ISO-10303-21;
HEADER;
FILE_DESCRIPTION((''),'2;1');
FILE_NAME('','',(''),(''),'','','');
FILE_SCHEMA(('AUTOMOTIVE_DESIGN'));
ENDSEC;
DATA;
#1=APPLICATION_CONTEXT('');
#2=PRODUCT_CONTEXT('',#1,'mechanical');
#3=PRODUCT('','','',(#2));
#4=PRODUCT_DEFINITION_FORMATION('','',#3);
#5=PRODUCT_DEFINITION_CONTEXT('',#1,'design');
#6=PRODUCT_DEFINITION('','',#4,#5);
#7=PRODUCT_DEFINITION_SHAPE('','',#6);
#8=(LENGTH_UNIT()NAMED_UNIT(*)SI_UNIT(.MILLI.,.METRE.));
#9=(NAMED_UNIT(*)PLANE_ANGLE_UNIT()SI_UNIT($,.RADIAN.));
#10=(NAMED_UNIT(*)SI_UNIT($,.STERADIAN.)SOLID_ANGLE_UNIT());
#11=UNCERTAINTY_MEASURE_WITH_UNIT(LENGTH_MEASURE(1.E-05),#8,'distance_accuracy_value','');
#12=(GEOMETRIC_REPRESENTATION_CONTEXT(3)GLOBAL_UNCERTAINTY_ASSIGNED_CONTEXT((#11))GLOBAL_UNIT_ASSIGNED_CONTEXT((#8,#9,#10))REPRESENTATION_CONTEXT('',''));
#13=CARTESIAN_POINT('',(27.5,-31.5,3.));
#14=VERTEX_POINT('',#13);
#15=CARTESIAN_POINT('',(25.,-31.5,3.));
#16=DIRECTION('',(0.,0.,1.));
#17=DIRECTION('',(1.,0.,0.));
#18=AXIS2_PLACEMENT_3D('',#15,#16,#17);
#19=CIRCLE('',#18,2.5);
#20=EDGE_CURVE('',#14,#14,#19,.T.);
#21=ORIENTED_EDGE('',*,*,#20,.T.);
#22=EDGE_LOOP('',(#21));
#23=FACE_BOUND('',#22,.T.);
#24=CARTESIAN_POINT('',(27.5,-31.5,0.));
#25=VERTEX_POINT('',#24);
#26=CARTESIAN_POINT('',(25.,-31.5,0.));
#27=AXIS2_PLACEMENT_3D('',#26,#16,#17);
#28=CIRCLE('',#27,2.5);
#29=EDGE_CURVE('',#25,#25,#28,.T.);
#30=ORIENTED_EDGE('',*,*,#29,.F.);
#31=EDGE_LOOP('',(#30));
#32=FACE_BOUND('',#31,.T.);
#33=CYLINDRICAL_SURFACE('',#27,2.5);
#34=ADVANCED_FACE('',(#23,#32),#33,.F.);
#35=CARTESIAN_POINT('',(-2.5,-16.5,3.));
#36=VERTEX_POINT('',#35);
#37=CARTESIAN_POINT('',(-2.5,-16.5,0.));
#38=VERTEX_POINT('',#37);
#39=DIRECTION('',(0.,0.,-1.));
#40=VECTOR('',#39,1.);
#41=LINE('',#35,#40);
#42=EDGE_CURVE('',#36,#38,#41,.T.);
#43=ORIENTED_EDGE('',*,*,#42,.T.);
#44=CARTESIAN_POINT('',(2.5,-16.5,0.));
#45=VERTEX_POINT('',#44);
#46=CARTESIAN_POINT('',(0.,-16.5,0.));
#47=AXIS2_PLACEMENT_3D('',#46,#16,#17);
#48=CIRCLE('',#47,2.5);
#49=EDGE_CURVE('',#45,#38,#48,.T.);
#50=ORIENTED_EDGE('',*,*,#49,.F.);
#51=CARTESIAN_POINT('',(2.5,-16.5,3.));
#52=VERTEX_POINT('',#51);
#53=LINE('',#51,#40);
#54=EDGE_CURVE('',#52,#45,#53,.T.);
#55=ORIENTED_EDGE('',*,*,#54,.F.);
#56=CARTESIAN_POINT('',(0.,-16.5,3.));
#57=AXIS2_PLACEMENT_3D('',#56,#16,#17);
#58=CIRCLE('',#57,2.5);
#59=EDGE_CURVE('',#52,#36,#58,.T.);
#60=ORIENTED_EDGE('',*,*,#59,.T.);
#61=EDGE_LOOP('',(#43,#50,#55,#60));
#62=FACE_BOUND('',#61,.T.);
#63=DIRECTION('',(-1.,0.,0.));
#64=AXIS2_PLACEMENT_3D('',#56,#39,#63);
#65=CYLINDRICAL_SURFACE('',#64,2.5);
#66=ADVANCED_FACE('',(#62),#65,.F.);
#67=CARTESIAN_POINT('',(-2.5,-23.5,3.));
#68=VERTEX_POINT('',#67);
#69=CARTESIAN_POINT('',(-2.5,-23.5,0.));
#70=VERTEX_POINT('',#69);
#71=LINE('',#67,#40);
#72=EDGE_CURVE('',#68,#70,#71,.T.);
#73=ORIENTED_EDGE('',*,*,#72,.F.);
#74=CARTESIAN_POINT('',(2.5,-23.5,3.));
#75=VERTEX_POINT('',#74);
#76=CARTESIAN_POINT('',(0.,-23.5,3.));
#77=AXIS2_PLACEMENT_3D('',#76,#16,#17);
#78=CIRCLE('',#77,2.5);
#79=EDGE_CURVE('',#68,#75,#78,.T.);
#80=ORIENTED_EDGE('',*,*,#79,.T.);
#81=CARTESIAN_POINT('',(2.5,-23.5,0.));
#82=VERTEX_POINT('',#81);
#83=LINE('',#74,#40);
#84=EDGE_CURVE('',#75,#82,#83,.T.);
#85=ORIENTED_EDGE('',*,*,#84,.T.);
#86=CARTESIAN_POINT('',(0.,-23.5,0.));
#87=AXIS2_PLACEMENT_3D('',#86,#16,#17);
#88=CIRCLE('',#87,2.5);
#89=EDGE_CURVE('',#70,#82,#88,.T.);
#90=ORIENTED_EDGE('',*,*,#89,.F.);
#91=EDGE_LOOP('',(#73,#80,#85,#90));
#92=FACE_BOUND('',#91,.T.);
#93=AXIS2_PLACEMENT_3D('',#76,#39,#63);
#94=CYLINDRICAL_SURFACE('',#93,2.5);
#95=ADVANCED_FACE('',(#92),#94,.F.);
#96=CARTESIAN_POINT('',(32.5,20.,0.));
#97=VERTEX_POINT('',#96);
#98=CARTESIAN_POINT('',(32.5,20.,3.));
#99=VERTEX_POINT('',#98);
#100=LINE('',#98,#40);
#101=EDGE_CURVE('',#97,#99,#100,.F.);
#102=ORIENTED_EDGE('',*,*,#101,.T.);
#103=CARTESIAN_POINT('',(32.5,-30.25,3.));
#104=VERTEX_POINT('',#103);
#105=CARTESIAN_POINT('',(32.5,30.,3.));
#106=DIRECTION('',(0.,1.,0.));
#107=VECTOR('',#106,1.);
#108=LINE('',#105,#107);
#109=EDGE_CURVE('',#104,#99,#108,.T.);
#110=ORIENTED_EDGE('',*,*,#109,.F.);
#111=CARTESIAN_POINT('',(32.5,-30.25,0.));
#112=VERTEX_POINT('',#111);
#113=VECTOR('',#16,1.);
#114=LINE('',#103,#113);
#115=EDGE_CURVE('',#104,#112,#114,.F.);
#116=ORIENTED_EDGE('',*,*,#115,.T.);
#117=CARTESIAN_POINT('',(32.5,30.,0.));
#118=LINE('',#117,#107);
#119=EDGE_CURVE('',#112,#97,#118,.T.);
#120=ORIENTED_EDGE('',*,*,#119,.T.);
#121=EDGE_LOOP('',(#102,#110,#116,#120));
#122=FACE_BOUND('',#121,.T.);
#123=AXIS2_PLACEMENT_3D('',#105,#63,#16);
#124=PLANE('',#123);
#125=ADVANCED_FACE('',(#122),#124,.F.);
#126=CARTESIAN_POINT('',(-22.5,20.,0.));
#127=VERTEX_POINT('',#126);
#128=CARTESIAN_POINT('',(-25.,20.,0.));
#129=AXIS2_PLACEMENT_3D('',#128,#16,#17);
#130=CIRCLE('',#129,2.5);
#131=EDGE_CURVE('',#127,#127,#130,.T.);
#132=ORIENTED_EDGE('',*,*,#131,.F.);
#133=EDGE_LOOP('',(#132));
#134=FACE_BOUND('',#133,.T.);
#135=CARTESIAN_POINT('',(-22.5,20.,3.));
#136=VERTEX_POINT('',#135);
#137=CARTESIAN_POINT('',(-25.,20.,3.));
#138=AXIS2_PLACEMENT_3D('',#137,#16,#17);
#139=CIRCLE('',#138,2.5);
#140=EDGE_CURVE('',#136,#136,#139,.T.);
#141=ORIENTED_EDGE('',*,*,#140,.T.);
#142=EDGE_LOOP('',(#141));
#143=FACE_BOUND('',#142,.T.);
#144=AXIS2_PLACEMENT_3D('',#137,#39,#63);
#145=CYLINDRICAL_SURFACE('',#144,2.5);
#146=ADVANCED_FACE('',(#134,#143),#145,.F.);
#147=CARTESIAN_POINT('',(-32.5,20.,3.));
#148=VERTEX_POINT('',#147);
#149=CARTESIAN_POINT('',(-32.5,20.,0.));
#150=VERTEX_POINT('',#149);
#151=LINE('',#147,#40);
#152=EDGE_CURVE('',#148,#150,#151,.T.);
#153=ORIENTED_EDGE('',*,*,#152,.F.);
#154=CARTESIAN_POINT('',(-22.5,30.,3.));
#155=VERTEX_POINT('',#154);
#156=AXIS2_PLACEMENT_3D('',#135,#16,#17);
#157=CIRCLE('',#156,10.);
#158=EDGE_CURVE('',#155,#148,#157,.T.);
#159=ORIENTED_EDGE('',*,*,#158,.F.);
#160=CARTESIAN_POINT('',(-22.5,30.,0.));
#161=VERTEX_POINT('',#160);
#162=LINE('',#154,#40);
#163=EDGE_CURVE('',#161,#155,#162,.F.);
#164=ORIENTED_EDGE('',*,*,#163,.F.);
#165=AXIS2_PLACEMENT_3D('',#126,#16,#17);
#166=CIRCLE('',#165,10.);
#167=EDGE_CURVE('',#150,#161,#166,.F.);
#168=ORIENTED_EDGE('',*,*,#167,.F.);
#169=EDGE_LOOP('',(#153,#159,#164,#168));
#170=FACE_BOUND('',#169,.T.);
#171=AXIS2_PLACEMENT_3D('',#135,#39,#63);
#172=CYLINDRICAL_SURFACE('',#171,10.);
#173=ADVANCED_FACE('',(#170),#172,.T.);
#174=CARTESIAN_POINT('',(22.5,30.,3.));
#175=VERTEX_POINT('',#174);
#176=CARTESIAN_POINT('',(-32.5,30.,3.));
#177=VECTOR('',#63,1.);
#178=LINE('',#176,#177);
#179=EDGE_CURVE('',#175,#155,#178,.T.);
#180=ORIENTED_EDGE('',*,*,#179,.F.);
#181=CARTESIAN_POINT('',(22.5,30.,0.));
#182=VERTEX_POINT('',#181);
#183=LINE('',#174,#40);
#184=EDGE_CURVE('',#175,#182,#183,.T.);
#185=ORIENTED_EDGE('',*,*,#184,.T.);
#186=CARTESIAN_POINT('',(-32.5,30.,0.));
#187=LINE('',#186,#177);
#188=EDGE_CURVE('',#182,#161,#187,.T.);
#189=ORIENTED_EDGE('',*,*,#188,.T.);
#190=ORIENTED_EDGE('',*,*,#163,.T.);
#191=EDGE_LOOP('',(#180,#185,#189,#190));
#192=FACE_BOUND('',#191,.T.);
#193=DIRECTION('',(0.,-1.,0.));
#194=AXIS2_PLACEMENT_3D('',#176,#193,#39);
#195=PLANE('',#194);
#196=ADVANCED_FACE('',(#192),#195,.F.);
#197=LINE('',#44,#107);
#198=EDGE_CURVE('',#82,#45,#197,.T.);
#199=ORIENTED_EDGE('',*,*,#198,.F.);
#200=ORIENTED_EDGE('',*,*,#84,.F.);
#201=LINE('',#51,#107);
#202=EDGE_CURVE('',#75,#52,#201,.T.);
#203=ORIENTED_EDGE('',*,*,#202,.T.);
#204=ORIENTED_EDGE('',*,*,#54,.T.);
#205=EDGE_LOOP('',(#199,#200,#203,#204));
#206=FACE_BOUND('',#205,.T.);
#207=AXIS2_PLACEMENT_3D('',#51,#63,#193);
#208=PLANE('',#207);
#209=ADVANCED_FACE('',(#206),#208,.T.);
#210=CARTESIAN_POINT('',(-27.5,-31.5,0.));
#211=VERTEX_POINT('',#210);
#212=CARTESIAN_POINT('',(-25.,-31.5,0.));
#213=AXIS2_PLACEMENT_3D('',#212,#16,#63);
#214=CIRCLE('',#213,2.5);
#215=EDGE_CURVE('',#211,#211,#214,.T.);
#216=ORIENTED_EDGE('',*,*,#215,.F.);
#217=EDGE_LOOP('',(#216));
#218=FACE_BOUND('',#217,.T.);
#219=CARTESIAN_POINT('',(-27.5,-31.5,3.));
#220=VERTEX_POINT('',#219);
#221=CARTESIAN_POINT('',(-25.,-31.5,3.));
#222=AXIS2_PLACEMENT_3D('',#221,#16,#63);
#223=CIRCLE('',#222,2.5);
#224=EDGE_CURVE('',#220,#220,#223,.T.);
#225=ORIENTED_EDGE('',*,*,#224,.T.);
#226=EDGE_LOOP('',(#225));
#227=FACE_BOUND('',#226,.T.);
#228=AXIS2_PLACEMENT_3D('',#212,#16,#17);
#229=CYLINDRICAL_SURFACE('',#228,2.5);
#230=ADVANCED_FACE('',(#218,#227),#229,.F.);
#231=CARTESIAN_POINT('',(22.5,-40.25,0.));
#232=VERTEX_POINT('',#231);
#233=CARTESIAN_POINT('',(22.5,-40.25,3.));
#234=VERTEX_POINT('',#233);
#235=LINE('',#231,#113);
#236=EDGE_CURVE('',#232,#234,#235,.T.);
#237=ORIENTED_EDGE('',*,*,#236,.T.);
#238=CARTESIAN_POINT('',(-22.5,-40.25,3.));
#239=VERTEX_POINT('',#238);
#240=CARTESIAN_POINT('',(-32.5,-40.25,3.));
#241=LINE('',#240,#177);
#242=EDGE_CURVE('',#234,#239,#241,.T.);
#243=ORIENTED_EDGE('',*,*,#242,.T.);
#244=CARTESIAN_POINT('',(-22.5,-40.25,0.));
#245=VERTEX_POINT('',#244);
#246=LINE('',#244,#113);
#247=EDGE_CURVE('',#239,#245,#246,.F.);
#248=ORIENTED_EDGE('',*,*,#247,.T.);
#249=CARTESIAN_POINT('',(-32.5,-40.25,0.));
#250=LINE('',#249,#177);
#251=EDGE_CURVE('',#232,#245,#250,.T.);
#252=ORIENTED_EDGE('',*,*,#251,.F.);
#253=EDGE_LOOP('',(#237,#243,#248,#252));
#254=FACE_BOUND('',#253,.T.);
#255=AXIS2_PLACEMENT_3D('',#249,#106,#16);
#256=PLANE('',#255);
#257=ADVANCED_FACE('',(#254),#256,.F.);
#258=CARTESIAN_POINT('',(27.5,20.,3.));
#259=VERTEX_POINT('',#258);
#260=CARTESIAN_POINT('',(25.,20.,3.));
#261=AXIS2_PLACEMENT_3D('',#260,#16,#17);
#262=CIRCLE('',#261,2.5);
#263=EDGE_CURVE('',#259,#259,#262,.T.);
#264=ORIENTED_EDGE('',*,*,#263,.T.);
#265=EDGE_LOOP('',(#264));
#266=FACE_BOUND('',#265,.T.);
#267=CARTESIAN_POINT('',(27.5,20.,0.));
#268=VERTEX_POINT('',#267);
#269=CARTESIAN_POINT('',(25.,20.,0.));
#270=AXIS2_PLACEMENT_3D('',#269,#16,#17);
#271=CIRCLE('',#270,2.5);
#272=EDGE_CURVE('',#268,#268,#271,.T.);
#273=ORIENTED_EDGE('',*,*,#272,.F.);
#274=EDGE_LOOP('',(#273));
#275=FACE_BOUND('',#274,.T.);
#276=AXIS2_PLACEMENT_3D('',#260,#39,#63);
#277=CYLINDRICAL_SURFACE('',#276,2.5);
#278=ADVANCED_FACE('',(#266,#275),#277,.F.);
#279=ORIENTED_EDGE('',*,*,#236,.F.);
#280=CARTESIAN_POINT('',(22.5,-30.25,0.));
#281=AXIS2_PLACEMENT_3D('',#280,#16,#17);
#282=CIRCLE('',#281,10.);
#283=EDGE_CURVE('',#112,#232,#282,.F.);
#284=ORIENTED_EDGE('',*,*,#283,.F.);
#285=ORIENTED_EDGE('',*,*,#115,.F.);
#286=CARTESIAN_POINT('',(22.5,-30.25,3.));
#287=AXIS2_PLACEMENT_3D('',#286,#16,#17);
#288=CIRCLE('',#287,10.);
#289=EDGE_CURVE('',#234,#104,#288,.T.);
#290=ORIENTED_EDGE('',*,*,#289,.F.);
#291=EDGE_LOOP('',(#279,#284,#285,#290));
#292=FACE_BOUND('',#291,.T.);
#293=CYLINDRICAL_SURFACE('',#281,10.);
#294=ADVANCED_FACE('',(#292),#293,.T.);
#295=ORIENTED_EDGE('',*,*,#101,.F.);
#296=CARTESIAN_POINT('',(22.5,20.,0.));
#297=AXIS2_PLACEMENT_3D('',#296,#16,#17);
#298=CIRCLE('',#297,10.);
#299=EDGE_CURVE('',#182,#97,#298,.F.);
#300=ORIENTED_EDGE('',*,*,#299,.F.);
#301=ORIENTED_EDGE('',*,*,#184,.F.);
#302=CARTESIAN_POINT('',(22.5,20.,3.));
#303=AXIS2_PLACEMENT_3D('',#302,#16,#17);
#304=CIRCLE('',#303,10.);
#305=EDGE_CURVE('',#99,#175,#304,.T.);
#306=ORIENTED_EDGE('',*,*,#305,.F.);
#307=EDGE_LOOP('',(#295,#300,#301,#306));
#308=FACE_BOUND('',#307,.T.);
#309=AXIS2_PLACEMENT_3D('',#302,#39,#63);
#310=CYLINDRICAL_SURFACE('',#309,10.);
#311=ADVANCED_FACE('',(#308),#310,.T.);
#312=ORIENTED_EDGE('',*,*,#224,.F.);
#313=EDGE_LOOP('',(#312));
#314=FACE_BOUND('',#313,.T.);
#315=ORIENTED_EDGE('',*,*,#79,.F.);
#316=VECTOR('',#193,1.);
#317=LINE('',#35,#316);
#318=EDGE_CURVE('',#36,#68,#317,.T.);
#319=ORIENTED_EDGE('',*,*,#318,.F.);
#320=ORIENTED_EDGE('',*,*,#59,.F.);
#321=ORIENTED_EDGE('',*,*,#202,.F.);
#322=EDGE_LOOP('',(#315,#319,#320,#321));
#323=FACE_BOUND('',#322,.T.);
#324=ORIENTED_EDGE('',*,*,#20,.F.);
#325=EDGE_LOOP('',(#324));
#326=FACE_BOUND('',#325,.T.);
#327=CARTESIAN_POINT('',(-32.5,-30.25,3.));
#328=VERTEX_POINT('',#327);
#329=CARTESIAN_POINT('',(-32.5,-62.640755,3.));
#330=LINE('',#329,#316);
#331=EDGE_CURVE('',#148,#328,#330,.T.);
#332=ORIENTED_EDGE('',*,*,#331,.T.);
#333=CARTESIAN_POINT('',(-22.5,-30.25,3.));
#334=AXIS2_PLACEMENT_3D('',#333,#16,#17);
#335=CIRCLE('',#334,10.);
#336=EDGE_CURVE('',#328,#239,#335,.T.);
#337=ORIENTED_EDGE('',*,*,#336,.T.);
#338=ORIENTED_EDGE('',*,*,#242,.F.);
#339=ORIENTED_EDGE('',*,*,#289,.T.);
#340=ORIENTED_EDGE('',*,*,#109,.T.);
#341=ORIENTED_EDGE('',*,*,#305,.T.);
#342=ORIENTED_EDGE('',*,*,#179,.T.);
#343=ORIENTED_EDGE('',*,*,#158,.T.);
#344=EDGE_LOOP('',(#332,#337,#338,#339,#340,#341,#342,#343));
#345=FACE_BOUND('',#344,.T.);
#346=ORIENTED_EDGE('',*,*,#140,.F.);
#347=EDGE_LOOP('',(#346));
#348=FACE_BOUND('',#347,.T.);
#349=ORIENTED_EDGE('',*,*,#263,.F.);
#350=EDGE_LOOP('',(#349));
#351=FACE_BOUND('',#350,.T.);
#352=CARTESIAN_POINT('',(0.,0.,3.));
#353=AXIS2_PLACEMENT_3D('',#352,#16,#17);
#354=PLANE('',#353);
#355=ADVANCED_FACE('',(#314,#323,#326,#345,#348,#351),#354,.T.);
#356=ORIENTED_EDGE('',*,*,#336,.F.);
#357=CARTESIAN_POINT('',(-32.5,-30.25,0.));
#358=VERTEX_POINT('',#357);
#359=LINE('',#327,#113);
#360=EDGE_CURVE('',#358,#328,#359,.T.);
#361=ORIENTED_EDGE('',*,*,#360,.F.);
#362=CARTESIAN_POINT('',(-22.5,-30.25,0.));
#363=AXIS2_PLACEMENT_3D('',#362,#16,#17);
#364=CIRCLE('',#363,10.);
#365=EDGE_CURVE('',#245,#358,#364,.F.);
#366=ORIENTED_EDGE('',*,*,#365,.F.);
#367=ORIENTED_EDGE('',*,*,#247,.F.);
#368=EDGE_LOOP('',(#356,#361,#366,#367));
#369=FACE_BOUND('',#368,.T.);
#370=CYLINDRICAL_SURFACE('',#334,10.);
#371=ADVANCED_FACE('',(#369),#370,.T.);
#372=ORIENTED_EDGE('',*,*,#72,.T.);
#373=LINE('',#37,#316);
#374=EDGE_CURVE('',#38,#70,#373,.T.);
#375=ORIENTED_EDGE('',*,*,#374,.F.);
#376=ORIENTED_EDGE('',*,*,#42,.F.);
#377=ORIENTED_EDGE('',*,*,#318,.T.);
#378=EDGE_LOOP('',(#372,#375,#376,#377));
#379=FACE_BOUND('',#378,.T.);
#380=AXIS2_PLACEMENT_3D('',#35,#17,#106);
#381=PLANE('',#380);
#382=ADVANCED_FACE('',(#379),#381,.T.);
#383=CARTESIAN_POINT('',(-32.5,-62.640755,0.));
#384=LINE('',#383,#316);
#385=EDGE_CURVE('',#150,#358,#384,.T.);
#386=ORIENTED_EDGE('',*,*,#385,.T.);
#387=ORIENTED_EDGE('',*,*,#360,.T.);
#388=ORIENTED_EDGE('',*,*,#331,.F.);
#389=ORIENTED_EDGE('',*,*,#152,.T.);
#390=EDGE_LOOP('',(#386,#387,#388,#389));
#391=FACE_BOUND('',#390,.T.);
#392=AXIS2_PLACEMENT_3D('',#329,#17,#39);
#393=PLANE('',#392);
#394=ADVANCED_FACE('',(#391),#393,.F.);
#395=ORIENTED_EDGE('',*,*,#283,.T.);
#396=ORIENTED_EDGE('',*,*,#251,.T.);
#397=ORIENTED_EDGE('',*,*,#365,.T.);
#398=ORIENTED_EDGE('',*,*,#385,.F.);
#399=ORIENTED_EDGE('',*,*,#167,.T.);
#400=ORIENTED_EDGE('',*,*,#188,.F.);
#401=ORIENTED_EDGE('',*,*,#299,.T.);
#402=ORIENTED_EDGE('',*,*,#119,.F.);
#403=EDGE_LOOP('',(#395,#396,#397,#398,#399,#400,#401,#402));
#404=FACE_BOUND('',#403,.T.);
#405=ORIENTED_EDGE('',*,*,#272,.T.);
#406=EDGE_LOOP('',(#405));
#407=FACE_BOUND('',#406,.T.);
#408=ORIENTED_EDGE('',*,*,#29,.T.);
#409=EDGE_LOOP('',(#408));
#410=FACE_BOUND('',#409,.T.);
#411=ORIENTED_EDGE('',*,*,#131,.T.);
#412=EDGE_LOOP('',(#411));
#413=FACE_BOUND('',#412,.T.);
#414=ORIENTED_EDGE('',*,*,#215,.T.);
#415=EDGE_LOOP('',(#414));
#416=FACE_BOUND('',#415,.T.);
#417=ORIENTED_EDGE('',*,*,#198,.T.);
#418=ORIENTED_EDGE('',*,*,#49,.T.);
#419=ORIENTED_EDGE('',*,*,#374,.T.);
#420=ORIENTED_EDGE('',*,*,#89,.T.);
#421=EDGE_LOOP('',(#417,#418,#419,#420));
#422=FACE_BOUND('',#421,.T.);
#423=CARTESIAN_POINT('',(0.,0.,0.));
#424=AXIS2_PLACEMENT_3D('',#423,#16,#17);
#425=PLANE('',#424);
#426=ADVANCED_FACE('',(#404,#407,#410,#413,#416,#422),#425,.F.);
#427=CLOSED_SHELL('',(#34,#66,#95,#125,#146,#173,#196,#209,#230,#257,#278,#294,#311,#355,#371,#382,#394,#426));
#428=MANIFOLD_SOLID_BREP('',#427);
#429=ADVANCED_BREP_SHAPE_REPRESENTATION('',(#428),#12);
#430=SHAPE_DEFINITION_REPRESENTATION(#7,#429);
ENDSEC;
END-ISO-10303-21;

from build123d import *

# Parameters (mm, degrees)
SKETCH1_R           = 2.5
BOSS_EXTRUDE1_DEPTH = 3
FILLET1_R           = 10
FILLET1_R_2         = 15
FILLET1_R_3         = 50
SKETCH2_R           = 1.75
SKETCH2_R_2         = 12
CUT_EXTRUDE1_DEPTH  = 82.389898264
SKETCH4_W           = 65
SKETCH4_H           = 34.30914122
CUT_EXTRUDE2_DEPTH  = 82.389898264
FILLET2_R           = 10
SKETCH5_R           = 2.5
CUT_EXTRUDE3_DEPTH  = 52.820000965


with BuildPart() as part:
    # Sketch1 → Boss-Extrude1 (new body)
    with BuildSketch(Plane.XY):
        Polygon((-32.5, 30), (32.5, 30), (32.5, -62.640754554), (0, -87.640754554), (-32.5, -62.640754554), align=None)
        with Locations((25, 20)):
            Circle(SKETCH1_R, mode=Mode.SUBTRACT)
        with Locations((-25, 20)):
            Circle(SKETCH1_R, mode=Mode.SUBTRACT)
        with BuildLine():
            Line((2.5, -16.5), (2.5, -23.5))
            ThreePointArc((2.5, -23.5), (0, -26), (-2.5, -23.5))
            Line((-2.5, -23.5), (-2.5, -16.5))
            ThreePointArc((-2.5, -16.5), (0, -14), (2.5, -16.5))
        make_face(mode=Mode.SUBTRACT)
    extrude(amount=BOSS_EXTRUDE1_DEPTH)

    # Fillet1
    # the kernel refuses this fillet: 50, 15, 10 mm, written as the material it takes off along each edge
    with BuildSketch(Plane(origin=(32.5, 30, -25), x_dir=(-1, 0, 0), z_dir=(0, 0, 1))) as fillet1_piece_1:
        with BuildLine():
            CenterArc((FILLET1_R, FILLET1_R), FILLET1_R, 180, 90)
            Line((0, FILLET1_R), (0, 0))
            Line((0, 0), (FILLET1_R, 0))
        make_face()
    extrude(amount=53, mode=Mode.SUBTRACT)
    with BuildSketch(Plane(origin=(-32.5, 30, -25), x_dir=(1, 0, 0), z_dir=(0, 0, 1))) as fillet1_piece_2:
        with BuildLine():
            CenterArc((FILLET1_R, -FILLET1_R), FILLET1_R, 90, 90)
            Line((0, -FILLET1_R), (0, 0))
            Line((0, 0), (FILLET1_R, 0))
        make_face()
    extrude(amount=53, mode=Mode.SUBTRACT)
    with BuildSketch(Plane(origin=(-32.5, -62.640754554, -18.465056154), x_dir=(0.7926239891046004, -0.6097107608496921, 0), z_dir=(0, 0, 1)), Plane(origin=(32.5, -62.640754554, -18.465056154), x_dir=(0, 1, 0), z_dir=(0, 0, 1))) as fillet1_piece_3:
        with BuildLine():
            CenterArc((FILLET1_R_2 * 0.492401497451, FILLET1_R_2), FILLET1_R_2, 217.568592029, 52.431407971)
            Line((-FILLET1_R_2 * 0.300222491654, FILLET1_R_2 * 0.39028923915), (0, 0))
            Line((0, 0), (FILLET1_R_2 * 0.492401497451, 0))
        make_face()
    extrude(amount=39.930112309, mode=Mode.SUBTRACT)
    with BuildSketch(Plane(origin=(0, -87.640754554, -96.153846154), x_dir=(0.7926239891046001, 0.6097107608496922, 0), z_dir=(0, 0, 1))) as fillet1_piece_4:
        with BuildLine():
            CenterArc((FILLET1_R_3 * 0.769230769231, FILLET1_R_3), FILLET1_R_3, 194.862815942, 75.137184058)
            Line((-FILLET1_R_3 * 0.197311981699, FILLET1_R_3 * 0.743494423792), (0, 0))
            Line((0, 0), (FILLET1_R_3 * 0.769230769231, 0))
        make_face()
    extrude(amount=195.307692308, mode=Mode.SUBTRACT)

    # Sketch2 → Cut-Extrude1 (cut, through all)
    with BuildSketch(Plane.XY.offset(3)):
        with Locations((12, -42)):
            Circle(SKETCH2_R)
        with Locations((-12, -42)):
            Circle(SKETCH2_R)
        with Locations((-12, -66)):
            Circle(SKETCH2_R)
        with Locations((12, -66)):
            Circle(SKETCH2_R)
        with Locations((0, -54)):
            Circle(SKETCH2_R_2)
    extrude(amount=-CUT_EXTRUDE1_DEPTH, mode=Mode.SUBTRACT)

    # Sketch4 → Cut-Extrude2 (cut, through all)
    with BuildSketch(Plane.XY.offset(3)):
        with Locations((0, -57.40457061)):
            Rectangle(SKETCH4_W, SKETCH4_H)
    extrude(amount=-CUT_EXTRUDE2_DEPTH, mode=Mode.SUBTRACT)

    # Fillet2
    fillet2_edges = [part.edges().sort_by_distance(p)[0] for p in [
        (-32.5, -40.25, 1.5),
        (32.5, -40.25, 1.5),
    ]]
    fillet(fillet2_edges, radius=FILLET2_R)

    # Sketch5 → Cut-Extrude3 (cut, through all)
    with BuildSketch(Plane.XY.offset(3)):
        with Locations((25, -31.5)):
            Circle(SKETCH5_R)
        with Locations(Location((-25, -31.5, 0), (0, 0, 180))):
            Circle(SKETCH5_R)
    extrude(amount=-CUT_EXTRUDE3_DEPTH, mode=Mode.SUBTRACT)


solid = part.part
